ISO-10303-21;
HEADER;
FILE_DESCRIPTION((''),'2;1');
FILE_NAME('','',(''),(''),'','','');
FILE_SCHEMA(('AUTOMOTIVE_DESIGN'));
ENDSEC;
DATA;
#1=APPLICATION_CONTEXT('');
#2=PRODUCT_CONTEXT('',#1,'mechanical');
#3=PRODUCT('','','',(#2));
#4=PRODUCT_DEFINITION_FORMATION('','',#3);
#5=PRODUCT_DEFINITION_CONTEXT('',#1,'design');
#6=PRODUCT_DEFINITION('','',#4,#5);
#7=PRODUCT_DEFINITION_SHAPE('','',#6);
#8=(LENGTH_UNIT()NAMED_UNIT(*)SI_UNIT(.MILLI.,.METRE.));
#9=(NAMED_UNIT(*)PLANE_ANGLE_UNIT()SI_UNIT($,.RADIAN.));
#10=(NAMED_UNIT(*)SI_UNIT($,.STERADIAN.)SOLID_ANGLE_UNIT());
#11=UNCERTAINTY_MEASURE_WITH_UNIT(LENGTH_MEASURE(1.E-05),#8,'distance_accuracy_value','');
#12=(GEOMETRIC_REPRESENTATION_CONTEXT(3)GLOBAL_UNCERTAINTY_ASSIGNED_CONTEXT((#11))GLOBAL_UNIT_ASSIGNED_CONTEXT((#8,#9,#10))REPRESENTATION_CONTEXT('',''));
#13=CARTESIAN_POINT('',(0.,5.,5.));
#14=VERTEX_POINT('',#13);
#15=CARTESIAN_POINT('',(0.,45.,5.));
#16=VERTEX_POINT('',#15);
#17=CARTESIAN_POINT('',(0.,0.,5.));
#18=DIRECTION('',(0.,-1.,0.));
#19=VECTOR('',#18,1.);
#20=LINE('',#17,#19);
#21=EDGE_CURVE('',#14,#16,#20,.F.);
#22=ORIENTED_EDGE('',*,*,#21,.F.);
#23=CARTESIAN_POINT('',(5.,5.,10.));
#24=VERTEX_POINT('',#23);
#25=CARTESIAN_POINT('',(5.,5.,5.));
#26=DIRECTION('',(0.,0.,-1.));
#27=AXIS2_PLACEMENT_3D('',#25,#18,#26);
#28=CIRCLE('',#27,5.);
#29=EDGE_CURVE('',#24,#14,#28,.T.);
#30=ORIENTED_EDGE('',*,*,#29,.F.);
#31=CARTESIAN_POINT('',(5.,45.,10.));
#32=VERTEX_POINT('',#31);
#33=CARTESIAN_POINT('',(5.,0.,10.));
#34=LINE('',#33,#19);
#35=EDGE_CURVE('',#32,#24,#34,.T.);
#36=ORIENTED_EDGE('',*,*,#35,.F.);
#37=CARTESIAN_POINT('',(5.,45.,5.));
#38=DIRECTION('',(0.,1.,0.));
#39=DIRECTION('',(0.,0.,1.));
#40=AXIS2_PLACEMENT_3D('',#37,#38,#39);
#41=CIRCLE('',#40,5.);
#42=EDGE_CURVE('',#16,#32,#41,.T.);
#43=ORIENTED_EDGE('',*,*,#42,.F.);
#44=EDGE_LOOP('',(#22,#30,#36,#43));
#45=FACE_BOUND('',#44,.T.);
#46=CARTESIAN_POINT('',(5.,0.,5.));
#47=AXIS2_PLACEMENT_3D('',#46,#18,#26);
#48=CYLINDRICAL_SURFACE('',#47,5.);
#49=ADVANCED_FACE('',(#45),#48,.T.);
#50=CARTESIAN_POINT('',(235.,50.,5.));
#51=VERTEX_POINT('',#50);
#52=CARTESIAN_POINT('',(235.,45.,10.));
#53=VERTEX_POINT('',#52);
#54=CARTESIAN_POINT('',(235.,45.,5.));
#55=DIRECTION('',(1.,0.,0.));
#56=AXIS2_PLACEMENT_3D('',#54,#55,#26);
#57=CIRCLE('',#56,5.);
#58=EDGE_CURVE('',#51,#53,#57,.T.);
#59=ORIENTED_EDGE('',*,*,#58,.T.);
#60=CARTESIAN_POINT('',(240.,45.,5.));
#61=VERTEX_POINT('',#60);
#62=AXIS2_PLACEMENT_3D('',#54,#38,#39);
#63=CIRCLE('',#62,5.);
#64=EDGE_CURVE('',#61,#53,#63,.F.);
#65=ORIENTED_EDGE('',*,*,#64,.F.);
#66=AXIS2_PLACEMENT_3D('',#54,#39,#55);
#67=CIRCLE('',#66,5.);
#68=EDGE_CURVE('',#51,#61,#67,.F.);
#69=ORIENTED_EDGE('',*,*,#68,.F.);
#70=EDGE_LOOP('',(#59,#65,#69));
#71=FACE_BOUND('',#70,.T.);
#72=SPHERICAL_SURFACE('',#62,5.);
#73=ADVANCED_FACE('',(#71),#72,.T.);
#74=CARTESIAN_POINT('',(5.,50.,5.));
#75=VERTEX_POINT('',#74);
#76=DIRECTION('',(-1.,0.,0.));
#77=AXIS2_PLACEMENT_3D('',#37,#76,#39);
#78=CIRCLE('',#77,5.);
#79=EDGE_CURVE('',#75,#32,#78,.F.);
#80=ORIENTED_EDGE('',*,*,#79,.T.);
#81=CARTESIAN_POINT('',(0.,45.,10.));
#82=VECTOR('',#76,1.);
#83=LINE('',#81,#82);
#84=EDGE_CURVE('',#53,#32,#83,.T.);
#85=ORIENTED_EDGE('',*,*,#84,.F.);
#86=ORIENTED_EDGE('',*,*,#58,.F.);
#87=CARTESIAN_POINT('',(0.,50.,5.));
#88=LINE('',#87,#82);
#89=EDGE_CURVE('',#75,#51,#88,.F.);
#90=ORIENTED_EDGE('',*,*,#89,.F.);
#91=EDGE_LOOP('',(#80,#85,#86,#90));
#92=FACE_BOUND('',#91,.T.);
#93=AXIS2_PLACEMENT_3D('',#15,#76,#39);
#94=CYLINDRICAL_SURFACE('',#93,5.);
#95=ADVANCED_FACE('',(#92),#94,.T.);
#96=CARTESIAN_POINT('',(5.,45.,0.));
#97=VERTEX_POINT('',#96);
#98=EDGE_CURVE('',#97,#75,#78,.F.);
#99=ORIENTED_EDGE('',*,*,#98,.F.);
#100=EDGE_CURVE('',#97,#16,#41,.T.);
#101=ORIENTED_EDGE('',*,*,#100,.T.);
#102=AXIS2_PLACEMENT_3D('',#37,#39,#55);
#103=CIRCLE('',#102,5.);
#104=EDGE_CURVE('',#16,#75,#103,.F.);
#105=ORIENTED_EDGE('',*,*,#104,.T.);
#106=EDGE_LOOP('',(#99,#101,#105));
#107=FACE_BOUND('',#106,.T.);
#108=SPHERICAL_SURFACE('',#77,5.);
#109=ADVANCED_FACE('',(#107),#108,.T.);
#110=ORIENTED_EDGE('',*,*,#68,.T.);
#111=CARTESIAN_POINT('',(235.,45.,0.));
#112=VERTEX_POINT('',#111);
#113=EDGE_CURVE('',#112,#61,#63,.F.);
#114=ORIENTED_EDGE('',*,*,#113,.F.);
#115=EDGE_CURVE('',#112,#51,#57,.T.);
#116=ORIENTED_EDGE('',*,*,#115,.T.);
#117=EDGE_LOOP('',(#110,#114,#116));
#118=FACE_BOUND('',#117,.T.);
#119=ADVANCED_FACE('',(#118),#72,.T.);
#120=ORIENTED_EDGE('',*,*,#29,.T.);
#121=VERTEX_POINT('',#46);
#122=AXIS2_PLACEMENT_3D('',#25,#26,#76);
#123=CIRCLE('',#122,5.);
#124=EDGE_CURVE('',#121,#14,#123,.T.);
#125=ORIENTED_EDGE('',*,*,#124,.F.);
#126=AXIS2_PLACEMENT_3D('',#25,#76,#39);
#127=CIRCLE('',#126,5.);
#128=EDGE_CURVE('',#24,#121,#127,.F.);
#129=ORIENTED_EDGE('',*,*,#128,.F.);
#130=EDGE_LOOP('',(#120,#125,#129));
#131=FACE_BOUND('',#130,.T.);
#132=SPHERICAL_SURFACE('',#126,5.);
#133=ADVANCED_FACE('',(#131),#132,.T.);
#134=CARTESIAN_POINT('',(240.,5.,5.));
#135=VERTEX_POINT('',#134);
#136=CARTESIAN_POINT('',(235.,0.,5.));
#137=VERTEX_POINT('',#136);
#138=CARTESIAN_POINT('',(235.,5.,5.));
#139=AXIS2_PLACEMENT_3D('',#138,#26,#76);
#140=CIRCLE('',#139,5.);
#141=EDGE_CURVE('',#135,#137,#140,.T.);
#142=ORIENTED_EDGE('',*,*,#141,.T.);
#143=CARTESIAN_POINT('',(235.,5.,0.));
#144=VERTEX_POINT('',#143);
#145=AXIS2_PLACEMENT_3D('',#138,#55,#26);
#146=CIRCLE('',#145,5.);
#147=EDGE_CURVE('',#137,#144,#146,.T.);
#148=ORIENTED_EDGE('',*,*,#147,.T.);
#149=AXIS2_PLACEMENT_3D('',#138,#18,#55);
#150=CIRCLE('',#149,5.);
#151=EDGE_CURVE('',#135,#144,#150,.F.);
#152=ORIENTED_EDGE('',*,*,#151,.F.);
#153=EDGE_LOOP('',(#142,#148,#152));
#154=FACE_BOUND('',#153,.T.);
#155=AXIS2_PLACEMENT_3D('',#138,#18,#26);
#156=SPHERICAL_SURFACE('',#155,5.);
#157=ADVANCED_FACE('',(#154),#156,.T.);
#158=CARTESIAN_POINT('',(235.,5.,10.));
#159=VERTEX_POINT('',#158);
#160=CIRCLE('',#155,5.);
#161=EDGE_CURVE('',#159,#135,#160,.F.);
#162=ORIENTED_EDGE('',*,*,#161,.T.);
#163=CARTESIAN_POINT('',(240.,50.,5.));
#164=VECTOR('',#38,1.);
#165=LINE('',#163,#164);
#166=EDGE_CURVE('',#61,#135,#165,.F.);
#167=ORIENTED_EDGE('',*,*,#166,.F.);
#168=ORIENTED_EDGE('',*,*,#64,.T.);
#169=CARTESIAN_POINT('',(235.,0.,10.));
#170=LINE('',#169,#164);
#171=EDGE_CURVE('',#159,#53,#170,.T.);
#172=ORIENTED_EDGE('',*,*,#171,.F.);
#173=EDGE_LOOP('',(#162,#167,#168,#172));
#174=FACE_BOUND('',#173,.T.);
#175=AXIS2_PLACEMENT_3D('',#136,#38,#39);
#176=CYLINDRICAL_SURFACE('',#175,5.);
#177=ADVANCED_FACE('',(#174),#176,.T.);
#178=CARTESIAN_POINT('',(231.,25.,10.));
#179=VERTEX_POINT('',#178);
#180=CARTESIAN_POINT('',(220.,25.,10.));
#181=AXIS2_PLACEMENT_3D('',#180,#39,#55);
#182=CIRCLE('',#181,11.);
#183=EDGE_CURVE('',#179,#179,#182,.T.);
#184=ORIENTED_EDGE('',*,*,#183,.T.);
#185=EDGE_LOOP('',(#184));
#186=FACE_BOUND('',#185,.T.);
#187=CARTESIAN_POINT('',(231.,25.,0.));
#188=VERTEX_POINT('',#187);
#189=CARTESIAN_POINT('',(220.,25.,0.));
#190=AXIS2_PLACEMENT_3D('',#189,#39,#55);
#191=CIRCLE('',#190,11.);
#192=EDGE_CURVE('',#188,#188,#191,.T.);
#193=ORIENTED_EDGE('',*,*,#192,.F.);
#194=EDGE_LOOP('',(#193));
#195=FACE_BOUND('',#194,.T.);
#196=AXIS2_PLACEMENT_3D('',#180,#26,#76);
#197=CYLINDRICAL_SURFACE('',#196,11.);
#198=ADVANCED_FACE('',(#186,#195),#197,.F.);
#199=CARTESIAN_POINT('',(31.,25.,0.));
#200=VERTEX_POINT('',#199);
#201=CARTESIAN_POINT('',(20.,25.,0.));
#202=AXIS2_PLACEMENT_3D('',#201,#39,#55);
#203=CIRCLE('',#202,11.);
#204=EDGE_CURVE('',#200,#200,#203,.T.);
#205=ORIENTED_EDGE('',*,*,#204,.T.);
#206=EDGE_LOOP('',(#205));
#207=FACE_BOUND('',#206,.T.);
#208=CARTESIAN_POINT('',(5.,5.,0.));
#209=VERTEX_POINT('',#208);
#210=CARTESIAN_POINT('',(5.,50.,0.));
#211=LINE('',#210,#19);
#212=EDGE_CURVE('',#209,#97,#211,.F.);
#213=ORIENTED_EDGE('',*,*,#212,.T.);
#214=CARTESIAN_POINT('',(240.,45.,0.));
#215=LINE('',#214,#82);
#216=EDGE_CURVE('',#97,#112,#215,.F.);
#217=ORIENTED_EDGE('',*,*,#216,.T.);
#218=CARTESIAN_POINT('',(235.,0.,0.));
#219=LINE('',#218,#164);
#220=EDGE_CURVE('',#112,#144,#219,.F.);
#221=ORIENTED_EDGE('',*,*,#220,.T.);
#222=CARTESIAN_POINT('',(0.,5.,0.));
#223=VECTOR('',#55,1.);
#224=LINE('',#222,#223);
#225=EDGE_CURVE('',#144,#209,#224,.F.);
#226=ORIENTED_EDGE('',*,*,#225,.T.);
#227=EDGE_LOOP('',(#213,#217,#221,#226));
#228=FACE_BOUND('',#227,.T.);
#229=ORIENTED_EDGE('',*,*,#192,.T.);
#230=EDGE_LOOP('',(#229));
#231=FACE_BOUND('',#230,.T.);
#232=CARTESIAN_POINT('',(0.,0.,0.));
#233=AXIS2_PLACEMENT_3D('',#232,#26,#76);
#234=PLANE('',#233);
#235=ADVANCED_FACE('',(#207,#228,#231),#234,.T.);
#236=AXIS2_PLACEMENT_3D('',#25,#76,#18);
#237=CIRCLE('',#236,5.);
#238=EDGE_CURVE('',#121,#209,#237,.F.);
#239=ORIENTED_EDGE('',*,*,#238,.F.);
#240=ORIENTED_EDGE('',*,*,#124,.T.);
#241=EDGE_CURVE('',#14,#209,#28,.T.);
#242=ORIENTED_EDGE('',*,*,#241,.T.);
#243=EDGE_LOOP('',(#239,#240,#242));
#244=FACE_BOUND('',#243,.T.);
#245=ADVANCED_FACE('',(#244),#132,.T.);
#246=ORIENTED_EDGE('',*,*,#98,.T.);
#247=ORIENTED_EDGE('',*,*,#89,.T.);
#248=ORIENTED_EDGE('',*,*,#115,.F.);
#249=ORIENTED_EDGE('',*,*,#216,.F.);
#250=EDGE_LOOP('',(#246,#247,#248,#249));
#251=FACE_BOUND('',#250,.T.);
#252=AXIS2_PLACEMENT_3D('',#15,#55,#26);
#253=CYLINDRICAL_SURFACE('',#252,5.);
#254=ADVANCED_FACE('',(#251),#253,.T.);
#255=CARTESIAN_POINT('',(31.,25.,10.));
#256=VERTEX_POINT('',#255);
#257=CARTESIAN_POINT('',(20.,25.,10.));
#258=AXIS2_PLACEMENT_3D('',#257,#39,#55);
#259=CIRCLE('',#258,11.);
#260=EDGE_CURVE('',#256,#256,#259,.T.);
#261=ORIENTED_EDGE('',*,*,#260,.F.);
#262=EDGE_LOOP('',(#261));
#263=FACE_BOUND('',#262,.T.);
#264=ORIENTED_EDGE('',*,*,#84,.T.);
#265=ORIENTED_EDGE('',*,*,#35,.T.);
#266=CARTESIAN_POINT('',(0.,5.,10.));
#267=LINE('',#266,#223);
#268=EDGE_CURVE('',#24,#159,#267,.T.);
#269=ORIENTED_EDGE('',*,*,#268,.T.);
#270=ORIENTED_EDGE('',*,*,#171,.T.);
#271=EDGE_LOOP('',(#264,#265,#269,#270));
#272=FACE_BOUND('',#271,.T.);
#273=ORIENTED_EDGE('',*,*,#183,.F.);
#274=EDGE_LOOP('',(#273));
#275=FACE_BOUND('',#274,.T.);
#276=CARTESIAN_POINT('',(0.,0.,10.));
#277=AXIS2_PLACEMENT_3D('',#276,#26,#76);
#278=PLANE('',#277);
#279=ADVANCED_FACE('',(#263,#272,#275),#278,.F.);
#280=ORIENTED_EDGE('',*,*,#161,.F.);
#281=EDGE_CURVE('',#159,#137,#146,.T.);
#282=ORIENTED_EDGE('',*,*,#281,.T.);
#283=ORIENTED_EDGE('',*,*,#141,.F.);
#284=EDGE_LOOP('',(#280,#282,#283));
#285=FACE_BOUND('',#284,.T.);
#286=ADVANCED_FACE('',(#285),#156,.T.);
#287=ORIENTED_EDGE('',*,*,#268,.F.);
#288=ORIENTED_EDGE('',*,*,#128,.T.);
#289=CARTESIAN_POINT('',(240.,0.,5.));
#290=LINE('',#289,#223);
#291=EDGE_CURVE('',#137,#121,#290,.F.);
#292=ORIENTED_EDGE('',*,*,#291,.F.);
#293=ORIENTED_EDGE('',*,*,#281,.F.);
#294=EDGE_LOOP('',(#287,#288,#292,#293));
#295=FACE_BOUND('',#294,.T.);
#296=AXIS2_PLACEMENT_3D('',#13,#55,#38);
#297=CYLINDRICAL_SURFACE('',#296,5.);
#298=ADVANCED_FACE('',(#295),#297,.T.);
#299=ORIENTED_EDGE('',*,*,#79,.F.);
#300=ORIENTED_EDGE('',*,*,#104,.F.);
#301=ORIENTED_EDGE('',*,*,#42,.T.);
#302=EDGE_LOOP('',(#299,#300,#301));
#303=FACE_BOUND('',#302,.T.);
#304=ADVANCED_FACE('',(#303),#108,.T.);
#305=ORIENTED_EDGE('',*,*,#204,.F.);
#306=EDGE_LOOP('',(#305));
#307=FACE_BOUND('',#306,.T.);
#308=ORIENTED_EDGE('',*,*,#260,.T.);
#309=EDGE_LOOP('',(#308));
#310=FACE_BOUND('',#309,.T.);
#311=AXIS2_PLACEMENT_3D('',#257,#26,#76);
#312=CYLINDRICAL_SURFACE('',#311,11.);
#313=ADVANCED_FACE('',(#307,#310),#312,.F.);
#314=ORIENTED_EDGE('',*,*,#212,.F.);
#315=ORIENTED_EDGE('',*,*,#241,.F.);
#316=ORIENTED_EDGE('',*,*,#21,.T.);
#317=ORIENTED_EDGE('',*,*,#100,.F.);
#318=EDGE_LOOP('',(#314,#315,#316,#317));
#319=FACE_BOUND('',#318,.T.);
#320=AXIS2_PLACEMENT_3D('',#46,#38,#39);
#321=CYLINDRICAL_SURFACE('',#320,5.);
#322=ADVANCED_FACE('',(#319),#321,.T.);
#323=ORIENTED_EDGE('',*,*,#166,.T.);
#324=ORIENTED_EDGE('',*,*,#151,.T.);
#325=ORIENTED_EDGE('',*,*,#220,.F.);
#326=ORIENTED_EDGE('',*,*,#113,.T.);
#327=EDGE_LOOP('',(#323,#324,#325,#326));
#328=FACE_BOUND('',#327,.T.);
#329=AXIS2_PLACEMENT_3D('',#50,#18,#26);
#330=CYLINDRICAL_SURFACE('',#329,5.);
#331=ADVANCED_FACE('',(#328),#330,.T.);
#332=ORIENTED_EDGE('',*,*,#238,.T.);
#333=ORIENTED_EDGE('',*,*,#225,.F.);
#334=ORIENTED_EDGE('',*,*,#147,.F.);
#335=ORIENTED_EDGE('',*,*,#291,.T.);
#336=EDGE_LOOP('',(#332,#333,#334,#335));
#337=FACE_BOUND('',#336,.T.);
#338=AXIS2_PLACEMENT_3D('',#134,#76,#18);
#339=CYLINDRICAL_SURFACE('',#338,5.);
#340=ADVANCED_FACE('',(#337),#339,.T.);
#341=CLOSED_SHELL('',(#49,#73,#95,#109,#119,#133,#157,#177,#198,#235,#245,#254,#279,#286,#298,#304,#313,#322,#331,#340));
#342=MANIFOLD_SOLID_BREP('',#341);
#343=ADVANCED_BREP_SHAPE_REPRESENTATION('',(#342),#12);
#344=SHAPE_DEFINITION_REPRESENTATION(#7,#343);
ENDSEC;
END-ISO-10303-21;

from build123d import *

# Parameters (mm, degrees)
ESBO_O1_W                = 240
ESBO_O1_H                = 50
ESBO_O1_R                = 11
RESSALTO_EXTRUS_O1_DEPTH = 10
FILETE1_R                = 5


with BuildPart() as part:
    # Esboço1 → Ressalto-extrusão1 (new body)
    with BuildSketch(Plane.XY):
        with Locations((120, 25)):
            Rectangle(ESBO_O1_W, ESBO_O1_H)
        with Locations((20, 25)):
            Circle(ESBO_O1_R, mode=Mode.SUBTRACT)
        with Locations((220, 25)):
            Circle(ESBO_O1_R, mode=Mode.SUBTRACT)
    extrude(amount=RESSALTO_EXTRUS_O1_DEPTH)

    # Filete1
    filete1_edges = [part.edges().sort_by_distance(p)[0] for p in [
        (120, 50, 10),
        (0, 25, 10),
        (120, 0, 10),
        (0, 25, 0),
        (120, 50, 0),
        (240, 25, 0),
        (120, 0, 0),
        (0, 0, 5),
        (0, 50, 5),
        (240, 50, 5),
        (240, 0, 5),
        (240, 25, 10),
    ]]
    fillet(filete1_edges, radius=FILETE1_R - 0.0001)  # a hair under: the kernel refuses the full size


solid = part.part
